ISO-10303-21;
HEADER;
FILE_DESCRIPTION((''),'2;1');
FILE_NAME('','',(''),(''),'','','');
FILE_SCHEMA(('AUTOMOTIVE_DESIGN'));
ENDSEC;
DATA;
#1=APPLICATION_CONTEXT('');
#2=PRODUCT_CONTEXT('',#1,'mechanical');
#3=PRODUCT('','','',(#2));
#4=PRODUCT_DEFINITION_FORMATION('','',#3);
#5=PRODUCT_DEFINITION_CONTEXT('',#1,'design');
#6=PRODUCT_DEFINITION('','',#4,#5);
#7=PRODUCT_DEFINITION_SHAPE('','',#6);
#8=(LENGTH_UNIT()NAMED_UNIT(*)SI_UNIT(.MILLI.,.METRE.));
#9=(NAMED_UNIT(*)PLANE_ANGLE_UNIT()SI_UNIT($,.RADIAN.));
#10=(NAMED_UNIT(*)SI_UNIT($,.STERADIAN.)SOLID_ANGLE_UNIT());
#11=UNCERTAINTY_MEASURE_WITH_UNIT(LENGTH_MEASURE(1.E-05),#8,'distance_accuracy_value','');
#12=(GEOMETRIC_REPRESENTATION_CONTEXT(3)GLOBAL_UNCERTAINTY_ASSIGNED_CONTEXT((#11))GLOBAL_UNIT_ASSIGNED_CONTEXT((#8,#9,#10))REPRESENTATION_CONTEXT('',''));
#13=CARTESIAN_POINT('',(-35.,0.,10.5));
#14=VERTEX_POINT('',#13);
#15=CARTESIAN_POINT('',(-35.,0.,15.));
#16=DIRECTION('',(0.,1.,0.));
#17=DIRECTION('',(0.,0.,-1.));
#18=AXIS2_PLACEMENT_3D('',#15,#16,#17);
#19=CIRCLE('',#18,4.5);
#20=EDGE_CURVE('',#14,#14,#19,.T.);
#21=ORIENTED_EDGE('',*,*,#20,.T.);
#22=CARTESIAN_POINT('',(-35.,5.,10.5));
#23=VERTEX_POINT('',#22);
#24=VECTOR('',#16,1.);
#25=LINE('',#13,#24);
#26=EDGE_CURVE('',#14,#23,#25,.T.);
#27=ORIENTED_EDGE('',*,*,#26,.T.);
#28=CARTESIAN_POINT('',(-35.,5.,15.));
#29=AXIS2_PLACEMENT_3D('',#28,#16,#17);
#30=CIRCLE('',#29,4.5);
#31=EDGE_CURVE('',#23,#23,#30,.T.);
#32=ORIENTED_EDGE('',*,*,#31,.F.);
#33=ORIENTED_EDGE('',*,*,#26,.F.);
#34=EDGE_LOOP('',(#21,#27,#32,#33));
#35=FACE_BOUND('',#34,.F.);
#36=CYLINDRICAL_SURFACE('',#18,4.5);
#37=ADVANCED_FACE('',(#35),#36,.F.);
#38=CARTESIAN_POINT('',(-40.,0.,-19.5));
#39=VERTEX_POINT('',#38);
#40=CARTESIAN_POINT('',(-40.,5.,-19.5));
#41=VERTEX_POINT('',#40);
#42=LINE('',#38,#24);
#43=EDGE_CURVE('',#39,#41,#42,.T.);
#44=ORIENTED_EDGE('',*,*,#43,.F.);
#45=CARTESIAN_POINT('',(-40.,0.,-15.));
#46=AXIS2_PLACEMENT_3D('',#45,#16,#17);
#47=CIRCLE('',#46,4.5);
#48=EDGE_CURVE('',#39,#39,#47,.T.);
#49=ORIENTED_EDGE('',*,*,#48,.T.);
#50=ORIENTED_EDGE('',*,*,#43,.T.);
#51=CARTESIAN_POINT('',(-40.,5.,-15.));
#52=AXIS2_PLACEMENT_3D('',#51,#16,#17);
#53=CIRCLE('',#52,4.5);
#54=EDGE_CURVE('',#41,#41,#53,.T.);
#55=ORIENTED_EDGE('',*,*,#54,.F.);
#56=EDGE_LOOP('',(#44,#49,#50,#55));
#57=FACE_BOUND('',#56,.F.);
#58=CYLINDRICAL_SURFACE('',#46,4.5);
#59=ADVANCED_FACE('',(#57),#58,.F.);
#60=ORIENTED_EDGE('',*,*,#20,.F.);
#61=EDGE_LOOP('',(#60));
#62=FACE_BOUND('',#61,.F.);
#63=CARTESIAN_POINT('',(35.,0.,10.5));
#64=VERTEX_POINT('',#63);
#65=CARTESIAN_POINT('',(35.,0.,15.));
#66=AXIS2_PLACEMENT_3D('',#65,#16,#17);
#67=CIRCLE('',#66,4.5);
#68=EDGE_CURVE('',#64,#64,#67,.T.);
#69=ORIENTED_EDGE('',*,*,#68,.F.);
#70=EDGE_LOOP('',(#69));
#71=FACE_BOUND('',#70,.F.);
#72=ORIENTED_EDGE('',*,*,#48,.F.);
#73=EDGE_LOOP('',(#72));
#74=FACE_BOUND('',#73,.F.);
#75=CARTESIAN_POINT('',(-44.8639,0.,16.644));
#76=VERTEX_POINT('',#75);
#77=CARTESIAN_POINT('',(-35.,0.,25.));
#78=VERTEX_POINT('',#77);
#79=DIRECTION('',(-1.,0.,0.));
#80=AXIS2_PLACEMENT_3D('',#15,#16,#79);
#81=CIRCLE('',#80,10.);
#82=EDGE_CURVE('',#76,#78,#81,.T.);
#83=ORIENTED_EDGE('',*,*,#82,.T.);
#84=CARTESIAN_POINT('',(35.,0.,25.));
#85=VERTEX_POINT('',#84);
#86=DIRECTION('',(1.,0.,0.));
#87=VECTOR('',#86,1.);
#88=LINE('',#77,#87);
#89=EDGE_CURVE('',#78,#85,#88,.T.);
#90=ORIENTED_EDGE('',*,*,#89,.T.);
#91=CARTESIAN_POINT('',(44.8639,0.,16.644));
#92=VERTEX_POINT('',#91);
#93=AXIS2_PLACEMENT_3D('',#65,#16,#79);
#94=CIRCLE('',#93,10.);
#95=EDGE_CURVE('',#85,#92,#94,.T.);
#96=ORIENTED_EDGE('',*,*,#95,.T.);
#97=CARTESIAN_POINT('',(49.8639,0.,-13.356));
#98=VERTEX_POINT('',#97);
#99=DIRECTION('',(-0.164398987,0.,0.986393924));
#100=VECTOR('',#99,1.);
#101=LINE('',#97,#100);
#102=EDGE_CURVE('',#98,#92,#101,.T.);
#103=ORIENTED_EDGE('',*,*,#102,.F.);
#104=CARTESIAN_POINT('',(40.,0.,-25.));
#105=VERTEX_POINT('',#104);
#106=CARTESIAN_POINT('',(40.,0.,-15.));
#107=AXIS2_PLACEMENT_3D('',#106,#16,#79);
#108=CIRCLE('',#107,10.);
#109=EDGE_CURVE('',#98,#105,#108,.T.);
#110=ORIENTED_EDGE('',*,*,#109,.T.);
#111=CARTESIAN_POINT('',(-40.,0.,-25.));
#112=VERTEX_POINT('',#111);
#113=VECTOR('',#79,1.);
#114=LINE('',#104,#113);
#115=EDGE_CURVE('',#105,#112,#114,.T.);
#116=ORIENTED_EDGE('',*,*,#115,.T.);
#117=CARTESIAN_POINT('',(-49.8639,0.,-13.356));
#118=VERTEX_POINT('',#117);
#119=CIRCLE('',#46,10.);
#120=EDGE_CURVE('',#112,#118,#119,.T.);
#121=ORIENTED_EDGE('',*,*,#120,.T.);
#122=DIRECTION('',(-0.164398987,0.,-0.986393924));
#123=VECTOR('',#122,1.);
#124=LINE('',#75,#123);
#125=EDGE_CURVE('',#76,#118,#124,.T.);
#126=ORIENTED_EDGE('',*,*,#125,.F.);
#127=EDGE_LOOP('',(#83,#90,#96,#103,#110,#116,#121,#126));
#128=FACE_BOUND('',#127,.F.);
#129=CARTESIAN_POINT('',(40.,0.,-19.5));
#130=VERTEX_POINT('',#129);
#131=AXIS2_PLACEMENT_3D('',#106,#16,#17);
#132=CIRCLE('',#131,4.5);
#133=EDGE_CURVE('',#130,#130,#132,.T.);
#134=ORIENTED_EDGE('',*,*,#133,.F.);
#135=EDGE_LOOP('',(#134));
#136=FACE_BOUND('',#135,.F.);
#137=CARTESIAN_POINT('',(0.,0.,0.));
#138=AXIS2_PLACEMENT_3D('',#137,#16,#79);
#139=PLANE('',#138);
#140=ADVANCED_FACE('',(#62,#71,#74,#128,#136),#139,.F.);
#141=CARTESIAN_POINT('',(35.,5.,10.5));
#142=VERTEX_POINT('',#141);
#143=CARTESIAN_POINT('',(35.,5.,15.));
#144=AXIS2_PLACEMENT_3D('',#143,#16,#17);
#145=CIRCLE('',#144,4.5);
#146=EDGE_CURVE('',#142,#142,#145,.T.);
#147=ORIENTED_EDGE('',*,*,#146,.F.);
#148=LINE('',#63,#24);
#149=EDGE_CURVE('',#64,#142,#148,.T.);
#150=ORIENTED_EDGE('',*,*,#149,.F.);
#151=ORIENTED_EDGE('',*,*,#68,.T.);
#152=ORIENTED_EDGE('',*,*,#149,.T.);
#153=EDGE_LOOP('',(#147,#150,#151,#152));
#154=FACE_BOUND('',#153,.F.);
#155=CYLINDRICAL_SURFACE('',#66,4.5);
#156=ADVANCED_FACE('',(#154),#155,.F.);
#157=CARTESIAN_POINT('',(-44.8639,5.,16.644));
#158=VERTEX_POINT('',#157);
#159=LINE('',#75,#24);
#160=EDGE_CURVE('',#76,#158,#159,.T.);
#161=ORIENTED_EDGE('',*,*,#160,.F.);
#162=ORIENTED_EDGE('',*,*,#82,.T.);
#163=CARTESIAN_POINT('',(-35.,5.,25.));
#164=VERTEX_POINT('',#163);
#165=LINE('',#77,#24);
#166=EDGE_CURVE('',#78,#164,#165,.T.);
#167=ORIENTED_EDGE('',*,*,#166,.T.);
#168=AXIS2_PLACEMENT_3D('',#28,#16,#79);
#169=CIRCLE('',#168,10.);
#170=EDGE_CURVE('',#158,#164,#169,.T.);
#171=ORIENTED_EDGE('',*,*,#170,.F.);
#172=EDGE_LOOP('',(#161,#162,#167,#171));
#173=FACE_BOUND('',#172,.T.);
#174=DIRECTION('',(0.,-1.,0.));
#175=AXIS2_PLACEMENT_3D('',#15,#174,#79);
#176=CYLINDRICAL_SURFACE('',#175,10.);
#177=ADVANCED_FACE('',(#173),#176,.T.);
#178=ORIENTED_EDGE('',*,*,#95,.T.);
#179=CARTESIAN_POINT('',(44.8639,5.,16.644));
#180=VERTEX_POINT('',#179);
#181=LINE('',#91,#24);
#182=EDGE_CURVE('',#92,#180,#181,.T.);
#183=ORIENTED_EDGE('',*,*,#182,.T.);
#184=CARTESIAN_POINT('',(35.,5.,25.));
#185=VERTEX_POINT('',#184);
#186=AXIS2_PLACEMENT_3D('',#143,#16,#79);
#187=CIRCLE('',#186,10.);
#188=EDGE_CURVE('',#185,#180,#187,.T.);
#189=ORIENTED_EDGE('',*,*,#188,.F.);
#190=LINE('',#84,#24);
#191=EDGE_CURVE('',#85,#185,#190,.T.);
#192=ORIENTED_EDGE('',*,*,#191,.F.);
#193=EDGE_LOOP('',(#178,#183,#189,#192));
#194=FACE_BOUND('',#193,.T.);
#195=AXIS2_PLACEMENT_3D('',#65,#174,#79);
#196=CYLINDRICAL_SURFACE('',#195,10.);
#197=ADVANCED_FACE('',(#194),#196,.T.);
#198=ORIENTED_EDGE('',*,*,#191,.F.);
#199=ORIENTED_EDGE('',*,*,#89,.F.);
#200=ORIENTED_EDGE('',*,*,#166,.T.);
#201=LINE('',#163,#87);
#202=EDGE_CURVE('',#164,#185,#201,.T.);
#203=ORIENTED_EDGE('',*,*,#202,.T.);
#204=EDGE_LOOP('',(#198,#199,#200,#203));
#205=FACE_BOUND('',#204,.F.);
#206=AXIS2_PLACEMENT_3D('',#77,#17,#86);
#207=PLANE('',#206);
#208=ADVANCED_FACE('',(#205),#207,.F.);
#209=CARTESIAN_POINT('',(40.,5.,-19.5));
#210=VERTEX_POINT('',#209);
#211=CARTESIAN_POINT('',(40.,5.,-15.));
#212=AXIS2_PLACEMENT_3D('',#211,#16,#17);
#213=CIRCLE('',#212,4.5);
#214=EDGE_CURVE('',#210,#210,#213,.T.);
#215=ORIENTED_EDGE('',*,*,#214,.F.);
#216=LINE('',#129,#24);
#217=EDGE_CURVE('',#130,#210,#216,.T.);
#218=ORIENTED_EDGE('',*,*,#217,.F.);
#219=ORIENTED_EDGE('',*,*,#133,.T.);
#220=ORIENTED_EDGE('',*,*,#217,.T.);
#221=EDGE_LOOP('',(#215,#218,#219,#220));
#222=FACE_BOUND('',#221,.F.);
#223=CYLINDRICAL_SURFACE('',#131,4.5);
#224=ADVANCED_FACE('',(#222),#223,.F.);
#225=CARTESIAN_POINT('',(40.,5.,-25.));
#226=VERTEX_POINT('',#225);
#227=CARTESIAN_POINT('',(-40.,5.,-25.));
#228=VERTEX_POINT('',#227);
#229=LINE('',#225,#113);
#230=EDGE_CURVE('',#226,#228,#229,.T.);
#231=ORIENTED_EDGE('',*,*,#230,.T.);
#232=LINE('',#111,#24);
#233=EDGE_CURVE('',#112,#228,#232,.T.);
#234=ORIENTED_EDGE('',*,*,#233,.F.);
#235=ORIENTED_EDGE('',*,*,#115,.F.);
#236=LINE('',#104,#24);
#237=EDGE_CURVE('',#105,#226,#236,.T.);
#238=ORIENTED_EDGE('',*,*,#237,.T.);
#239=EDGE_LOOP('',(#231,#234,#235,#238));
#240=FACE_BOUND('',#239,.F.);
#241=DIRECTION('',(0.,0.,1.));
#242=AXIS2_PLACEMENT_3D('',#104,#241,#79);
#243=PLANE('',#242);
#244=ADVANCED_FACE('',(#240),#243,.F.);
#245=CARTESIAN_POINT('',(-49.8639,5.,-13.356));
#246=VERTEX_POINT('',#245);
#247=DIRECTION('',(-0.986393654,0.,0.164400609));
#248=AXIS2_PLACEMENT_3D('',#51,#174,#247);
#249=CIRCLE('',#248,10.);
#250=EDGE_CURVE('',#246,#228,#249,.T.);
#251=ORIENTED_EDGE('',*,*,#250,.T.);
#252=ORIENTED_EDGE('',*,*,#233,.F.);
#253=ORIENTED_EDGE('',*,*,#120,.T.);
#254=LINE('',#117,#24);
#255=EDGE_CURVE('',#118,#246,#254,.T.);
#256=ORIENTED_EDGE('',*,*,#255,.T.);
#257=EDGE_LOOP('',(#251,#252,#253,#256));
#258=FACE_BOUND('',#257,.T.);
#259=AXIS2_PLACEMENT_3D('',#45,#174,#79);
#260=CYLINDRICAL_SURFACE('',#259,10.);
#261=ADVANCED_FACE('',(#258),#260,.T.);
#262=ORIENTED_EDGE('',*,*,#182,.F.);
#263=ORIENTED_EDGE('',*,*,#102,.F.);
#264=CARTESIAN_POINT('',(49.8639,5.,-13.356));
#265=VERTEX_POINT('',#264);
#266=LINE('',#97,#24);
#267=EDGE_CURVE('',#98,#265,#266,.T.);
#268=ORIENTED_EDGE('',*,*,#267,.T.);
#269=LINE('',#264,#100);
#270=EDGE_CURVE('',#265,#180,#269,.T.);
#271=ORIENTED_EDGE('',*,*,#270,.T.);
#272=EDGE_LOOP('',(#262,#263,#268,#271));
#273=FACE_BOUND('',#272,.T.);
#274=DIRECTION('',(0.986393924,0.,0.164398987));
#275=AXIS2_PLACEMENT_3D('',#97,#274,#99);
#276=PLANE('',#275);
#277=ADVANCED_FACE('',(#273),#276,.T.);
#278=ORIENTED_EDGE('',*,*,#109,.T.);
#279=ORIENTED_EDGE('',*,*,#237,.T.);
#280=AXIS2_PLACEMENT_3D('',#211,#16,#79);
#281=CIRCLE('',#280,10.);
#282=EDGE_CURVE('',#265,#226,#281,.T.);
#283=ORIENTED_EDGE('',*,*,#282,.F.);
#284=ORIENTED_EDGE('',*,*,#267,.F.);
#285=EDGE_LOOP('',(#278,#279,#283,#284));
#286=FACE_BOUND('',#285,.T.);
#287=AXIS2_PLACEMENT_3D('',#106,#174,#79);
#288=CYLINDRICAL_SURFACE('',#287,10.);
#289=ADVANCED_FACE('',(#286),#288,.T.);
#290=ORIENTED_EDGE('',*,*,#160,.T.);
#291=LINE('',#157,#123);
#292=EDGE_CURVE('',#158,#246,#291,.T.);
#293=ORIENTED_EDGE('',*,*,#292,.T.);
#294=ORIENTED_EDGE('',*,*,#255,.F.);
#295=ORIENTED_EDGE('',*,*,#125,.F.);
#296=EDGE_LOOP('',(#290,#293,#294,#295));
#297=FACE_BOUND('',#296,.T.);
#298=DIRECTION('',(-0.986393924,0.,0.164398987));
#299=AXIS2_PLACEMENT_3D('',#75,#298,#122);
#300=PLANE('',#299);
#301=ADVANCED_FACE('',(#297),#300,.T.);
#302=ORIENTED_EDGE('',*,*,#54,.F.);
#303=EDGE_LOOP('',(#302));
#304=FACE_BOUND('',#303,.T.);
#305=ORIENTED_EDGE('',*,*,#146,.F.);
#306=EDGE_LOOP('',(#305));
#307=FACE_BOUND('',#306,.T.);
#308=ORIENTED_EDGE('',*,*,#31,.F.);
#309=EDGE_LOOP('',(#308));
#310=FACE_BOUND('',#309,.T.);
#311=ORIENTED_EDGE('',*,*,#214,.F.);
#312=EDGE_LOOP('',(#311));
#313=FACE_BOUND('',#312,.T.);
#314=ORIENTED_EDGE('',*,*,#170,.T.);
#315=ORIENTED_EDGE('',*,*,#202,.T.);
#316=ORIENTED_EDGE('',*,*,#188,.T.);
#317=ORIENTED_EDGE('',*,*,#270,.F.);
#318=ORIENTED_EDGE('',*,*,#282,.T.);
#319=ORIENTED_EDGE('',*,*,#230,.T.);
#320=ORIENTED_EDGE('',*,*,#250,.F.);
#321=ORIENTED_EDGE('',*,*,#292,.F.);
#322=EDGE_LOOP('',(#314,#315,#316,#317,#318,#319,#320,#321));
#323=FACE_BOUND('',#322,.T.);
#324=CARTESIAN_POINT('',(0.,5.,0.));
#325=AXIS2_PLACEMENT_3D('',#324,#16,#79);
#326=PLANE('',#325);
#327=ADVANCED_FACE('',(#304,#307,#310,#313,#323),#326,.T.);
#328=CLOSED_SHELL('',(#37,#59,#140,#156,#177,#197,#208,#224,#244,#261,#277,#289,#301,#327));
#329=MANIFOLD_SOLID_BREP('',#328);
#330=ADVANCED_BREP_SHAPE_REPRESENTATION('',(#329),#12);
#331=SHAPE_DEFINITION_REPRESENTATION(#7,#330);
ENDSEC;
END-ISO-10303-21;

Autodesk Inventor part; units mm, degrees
ref_plane "YZ Plane" through (0, 0, 0) normal (1, 0, 0) x (0, 1, 0)
ref_plane "XZ Plane" through (0, 0, 0) normal (0, 1, 0) x (-1, 0, 0)
ref_plane "XY Plane" through (0, 0, 0) normal (0, 0, 1) x (1, 0, 0)
sketch "Sketch1" plane through (0, 0, 0) normal (0, 1, 0) x (-1, 0, 0)
  line L0 (-40, -25) -> (40, -25)
  line L1 (35, 25) -> (-35, 25)
  line L2 (-49.8639, -13.356) -> (-44.8639, 16.644)
  line L3 (44.8639, 16.644) -> (49.8639, -13.356)
  circle A0 centre (-35, 15) radius 10
  circle A1 centre (-40, -15) radius 10
  circle A2 centre (35, 15) radius 10
  circle A3 centre (40, -15) radius 10
  line L4 (-35, 5) -> (35, 5)
  line L5 (-40, -5) -> (40, -5)
  line L6 (30.1361, -16.644) -> (25.1361, 13.356)
  line L7 (-25.1361, 13.356) -> (-30.1361, -16.644)
  point P0 (0, 0)
  point P1 (51.8046, -25)
  point P2 (0, 25)
  point P3 (0, -25)
  point P4 (0, -25)
  point P5 (-44.8639, 16.644)
  dimension "d22" = 70
  dimension "d23" = 50
  dimension "d24" = 25
  dimension "d25" = 80
  dimension "d26" = 20
extrude "Extrusion1" add sketch "Sketch1" along normal blind 5
hole "Hole2" at (-35, 0, 15) direction (0, 1, 0) diameter 9 end through all clearance for "Hex Head Cap Screw ISO 24017" size "M8" standard "ISO"
pattern_sketch "Sketch Driven Pattern1" of "Hole2" from (-35, 0, 15) copies at (-40, 0, -15) at (40, 0, -15) at (35, 0, 15)
equation "\"d24\" = 0.5 * d23"
properties part number "PWTR-0085" material "Aluminum 6061"
